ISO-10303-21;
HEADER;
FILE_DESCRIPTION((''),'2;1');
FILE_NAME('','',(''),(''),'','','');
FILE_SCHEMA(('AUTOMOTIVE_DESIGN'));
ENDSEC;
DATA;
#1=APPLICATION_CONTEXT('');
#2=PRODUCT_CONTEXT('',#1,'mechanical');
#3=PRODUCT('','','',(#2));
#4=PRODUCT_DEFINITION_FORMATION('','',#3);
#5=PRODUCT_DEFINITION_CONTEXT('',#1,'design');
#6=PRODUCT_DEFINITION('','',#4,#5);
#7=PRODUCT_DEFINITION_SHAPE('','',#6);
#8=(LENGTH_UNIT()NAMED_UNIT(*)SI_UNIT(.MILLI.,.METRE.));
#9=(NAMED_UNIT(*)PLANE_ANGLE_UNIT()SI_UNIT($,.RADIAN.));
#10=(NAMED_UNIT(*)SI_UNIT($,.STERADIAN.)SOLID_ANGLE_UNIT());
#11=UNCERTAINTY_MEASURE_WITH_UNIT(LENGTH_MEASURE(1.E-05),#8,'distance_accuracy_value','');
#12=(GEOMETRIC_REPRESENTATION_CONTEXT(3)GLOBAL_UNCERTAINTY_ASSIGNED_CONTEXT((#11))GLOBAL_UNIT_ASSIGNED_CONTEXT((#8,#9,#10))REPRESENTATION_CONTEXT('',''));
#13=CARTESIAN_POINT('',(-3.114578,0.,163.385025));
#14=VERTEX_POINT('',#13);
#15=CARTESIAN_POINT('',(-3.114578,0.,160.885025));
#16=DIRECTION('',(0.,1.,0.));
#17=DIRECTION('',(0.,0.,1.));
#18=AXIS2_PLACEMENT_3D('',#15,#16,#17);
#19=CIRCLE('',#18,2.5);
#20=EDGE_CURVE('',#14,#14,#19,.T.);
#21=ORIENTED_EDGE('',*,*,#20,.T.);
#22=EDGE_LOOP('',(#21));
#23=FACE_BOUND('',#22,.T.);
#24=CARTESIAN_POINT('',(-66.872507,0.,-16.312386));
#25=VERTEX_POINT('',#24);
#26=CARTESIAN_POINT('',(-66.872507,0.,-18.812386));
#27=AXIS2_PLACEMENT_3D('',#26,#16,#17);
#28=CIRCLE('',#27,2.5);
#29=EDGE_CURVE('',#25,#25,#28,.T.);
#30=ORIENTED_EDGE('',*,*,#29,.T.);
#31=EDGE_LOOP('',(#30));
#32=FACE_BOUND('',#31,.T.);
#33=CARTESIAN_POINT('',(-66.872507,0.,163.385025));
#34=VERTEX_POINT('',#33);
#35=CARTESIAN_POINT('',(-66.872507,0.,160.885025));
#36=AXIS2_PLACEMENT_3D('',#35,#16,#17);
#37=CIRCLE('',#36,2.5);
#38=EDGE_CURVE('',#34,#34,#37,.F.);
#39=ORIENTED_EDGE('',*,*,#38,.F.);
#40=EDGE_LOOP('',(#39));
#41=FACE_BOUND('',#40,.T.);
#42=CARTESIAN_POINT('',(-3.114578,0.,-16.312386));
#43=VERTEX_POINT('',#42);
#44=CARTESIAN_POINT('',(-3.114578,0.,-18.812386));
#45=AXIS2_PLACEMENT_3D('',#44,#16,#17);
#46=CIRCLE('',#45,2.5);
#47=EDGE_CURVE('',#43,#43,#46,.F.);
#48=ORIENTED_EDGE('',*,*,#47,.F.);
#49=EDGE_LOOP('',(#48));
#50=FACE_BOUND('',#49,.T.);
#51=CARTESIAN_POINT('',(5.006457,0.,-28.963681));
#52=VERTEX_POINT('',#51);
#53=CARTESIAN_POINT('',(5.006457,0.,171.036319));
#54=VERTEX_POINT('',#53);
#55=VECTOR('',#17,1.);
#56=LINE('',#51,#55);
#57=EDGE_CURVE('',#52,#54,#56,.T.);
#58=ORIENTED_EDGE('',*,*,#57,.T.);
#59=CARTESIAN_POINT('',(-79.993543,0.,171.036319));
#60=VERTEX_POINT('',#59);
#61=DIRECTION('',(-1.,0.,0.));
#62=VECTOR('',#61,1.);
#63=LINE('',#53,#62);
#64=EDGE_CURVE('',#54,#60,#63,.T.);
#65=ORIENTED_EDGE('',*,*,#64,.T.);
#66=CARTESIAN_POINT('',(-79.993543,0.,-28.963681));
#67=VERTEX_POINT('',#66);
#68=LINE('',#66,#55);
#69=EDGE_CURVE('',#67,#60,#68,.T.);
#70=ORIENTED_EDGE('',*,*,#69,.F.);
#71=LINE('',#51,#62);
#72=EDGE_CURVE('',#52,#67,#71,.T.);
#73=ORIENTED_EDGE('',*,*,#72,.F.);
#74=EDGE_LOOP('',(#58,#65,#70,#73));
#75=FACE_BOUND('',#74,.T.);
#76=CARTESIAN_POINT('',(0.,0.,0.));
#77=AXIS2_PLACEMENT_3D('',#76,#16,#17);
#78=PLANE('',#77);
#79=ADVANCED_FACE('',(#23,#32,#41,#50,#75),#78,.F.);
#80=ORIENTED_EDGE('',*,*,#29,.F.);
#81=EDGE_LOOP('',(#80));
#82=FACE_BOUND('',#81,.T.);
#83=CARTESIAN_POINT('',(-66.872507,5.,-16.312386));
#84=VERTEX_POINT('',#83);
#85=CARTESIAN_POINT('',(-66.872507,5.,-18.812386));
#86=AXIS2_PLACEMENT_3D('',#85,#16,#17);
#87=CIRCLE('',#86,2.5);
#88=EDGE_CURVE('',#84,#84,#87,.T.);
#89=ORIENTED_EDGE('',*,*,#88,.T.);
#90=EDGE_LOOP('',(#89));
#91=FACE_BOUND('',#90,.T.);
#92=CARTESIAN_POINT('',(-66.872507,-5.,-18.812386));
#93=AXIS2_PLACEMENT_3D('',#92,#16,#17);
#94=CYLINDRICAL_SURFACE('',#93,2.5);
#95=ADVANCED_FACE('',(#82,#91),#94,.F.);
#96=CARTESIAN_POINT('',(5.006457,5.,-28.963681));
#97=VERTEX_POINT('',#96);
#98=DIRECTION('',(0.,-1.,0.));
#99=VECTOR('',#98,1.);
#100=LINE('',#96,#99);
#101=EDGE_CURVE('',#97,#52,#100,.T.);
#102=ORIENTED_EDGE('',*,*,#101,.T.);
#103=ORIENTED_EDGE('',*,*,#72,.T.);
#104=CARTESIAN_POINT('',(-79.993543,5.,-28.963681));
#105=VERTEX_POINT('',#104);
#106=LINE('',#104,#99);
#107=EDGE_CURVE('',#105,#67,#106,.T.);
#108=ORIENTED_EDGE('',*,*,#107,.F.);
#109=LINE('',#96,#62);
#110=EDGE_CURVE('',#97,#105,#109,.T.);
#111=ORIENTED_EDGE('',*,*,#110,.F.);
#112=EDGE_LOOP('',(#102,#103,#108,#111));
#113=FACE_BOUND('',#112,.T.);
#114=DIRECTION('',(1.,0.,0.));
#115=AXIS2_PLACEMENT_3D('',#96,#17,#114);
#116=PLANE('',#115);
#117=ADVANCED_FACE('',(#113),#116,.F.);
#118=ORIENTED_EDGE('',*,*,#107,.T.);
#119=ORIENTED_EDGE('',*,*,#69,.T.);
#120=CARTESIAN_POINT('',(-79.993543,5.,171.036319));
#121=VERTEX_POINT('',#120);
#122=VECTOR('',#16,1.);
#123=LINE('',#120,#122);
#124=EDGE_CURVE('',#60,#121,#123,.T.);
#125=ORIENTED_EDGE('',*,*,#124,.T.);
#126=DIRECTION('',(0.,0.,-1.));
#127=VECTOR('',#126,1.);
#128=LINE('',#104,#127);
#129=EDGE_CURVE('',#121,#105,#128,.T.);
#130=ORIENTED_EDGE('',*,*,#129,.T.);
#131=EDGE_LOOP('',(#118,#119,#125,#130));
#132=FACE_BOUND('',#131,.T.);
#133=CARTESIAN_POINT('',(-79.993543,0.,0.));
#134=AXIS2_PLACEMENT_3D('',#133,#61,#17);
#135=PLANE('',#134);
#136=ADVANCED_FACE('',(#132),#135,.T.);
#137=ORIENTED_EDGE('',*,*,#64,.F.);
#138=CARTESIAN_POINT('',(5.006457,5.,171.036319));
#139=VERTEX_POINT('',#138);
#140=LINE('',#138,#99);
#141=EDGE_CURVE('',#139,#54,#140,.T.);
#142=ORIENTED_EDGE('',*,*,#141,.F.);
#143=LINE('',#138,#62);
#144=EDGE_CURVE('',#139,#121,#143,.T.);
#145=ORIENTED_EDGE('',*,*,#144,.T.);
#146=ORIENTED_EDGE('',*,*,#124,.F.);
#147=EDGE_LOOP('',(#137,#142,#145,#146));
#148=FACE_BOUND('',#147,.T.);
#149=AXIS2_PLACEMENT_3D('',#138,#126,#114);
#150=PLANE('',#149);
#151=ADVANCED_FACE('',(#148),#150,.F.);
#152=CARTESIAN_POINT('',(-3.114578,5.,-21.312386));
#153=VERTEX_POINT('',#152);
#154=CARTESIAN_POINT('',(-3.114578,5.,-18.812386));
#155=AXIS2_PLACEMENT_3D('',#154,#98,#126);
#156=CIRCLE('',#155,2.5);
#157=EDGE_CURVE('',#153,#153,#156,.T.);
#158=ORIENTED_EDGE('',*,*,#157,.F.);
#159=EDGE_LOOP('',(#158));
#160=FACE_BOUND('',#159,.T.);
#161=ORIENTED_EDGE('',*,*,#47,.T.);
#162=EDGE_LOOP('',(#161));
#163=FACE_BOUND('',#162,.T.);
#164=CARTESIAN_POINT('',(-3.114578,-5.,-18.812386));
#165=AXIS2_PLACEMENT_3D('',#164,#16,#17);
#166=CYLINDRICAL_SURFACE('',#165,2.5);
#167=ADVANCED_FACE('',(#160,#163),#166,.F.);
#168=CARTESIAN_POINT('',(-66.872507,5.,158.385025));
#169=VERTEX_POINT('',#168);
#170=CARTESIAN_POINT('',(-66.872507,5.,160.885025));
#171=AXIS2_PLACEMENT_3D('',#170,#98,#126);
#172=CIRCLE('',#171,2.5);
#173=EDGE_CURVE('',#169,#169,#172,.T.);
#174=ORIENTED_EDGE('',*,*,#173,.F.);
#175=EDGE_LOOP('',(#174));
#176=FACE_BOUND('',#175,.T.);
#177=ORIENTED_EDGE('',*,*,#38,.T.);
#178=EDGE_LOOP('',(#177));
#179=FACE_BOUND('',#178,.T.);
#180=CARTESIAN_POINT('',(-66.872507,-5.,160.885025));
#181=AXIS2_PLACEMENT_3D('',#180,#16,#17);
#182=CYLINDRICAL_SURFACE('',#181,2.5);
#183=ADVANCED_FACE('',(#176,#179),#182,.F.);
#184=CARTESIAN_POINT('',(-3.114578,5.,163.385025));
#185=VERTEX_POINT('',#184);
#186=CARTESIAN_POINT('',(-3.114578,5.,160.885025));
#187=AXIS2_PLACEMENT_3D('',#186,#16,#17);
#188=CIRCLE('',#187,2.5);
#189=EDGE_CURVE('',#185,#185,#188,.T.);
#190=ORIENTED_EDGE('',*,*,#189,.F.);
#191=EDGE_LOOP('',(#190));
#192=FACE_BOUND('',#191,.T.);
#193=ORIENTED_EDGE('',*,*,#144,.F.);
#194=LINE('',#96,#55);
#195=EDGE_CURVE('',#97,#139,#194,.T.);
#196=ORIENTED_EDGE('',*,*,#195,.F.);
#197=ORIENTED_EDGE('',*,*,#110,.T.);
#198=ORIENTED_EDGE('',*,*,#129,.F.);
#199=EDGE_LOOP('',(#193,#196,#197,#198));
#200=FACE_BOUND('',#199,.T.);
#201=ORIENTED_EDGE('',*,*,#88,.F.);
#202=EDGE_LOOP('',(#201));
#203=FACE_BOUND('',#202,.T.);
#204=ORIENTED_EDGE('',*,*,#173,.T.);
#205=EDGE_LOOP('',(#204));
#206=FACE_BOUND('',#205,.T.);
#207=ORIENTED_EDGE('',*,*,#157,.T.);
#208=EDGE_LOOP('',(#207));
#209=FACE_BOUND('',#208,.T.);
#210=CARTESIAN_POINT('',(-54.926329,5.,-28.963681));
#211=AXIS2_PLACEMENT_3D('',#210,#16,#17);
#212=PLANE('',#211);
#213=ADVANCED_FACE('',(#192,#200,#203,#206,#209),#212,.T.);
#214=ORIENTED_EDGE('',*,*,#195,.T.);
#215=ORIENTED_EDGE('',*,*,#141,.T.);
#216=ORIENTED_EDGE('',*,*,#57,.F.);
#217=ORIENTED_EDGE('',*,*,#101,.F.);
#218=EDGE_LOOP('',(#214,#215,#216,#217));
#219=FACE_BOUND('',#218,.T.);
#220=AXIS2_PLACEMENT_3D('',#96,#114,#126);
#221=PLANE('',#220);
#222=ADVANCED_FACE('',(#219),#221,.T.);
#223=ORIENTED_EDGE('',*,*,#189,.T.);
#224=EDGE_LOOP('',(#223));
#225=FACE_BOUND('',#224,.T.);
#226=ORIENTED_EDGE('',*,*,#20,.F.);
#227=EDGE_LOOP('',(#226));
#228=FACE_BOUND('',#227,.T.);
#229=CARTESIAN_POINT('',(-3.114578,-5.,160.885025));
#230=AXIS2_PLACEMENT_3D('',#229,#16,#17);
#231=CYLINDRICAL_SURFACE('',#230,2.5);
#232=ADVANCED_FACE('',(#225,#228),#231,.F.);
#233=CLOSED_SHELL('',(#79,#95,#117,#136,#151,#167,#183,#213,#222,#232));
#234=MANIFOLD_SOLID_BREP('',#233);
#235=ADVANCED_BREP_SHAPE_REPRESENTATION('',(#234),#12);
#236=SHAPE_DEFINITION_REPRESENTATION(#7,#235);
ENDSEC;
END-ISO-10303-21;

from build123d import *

# Parameters (mm, degrees)
STOCK_BASE_1_OUTLINE_W = 80
STOCK_BASE_1_OUTLINE_H = 200
STOCK_BASE_1_DEPTH     = 5
SKETCH1_R              = 2.5
CUT_EXTRUDE2_DEPTH     = 10
SKETCH3_W              = 200
SKETCH3_H              = 5
BOSS_EXTRUDE1_DEPTH    = 5


# Read off the part's stored shape, not the designer's step: Stock-Base-1
with BuildPart() as part:
    # Stock-Base-1 outline → Stock-Base-1 (new body)
    with BuildSketch(Plane(origin=(0, 0, 0), x_dir=(1, 0, 0), z_dir=(0, 1, 0))):
        with Locations((-34.993542676, -71.036319336)):
            Rectangle(STOCK_BASE_1_OUTLINE_W, STOCK_BASE_1_OUTLINE_H)
    extrude(amount=STOCK_BASE_1_DEPTH)

    # Sketch1 → Cut-Extrude2 (cut)
    with BuildSketch(Plane(origin=(0, 5, 0), x_dir=(1, 0, 0), z_dir=(0, 1, 0))):
        with Locations(Location((-66.872507057, 18.812386141, 0), (0, 0, 270))):
            Circle(SKETCH1_R)
        with Locations(Location((-3.114578294, 18.812386141, 0), (0, 0, 270))):
            Circle(SKETCH1_R)
        with Locations(Location((-3.114578294, -160.885024814, 0), (0, 0, 270))):
            Circle(SKETCH1_R)
        with Locations(Location((-66.872507057, -160.885024814, 0), (0, 0, 270))):
            Circle(SKETCH1_R)
    extrude(amount=-CUT_EXTRUDE2_DEPTH, mode=Mode.SUBTRACT)

    # Sketch3 → Boss-Extrude1 (add)
    with BuildSketch(Plane.ZY.offset(74.993542676)):
        with Locations((71.036319336, 2.5)):
            Rectangle(SKETCH3_W, SKETCH3_H)
    extrude(amount=BOSS_EXTRUDE1_DEPTH)


solid = part.part
